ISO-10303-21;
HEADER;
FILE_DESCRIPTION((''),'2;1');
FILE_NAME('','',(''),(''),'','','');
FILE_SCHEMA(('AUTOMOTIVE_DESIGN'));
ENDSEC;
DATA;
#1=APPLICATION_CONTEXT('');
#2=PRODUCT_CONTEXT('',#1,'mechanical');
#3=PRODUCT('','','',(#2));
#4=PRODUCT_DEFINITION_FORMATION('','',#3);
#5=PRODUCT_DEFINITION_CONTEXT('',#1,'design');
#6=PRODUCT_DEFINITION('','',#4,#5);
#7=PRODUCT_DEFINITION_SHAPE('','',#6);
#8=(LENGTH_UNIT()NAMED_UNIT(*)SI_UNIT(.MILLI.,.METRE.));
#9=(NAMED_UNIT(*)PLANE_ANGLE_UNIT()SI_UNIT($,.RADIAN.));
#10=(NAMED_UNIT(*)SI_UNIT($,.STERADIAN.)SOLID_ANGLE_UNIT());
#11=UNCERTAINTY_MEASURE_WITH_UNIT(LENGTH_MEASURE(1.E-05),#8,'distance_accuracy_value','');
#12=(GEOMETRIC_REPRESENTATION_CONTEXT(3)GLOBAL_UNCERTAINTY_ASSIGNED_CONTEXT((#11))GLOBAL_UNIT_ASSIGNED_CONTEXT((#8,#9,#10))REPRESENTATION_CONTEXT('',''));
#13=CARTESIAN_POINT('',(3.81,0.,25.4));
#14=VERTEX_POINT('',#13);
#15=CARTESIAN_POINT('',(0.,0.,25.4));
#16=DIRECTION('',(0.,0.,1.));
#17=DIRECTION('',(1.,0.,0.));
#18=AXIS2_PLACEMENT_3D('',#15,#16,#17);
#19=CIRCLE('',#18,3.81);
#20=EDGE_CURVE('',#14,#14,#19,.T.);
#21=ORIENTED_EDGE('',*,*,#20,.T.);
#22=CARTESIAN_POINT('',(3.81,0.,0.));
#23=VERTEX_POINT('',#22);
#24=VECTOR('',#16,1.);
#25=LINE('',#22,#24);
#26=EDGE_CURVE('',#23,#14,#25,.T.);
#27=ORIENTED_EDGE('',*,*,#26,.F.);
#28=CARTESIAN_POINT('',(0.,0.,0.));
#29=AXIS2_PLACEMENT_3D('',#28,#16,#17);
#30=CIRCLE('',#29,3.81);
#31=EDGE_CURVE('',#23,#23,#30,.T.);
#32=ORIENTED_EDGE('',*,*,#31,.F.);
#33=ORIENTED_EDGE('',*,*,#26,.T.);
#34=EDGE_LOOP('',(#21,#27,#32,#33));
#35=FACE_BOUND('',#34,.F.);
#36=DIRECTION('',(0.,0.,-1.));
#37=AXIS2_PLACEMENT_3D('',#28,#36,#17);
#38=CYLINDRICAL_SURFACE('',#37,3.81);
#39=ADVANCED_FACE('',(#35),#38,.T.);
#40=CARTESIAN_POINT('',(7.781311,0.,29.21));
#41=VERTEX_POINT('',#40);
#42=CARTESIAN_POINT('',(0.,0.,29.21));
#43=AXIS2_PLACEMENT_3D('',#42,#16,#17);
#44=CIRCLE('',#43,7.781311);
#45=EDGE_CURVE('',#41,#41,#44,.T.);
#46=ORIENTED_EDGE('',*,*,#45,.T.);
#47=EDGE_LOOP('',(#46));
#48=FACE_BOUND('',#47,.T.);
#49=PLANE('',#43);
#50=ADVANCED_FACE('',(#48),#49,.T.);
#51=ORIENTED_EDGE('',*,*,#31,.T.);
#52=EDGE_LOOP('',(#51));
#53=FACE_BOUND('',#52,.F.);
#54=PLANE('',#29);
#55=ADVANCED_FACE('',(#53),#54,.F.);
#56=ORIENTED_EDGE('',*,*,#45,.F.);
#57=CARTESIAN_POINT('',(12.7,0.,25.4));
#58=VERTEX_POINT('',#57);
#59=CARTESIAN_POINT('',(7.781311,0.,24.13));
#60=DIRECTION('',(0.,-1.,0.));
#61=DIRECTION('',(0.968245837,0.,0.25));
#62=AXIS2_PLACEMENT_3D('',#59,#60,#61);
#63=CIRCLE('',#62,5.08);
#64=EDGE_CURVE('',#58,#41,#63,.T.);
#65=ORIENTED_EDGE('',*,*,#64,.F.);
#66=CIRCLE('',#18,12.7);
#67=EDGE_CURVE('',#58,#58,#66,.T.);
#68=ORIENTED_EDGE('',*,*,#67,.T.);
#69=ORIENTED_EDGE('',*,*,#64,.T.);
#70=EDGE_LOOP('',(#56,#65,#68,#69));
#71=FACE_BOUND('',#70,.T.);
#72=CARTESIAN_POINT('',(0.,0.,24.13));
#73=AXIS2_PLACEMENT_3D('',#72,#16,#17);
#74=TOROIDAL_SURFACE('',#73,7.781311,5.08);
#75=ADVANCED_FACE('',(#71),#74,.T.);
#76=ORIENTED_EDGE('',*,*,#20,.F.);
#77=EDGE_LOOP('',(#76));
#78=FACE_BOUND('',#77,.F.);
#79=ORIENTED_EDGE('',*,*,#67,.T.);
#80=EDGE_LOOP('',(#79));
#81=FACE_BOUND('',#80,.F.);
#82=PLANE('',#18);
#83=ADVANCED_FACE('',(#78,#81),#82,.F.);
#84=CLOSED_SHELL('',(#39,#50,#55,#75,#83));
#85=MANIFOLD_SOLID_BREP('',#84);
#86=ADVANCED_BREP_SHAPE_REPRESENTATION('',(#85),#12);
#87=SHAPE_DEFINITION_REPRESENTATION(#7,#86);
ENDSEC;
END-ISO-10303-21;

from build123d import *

# Parameters (mm, degrees)
F0_R     = 3.81
F1_DEPTH = 25.4
F2_R     = 6.35
F2_R_2   = 3.81
F3_DEPTH = 3.81
F2_R_3   = 12.7
F4_DEPTH = 3.81


# Not quite as in the source:
# - a fillet or chamfer that OpenCascade refuses, or shapes differently, is made with other operations: its cross-section is extruded or revolved along the edge and cut away or added


with BuildPart() as f1:
    # F0 (on Top) → F1 (new body)
    with BuildSketch(Plane.XY):
        Circle(F0_R)
    extrude(amount=F1_DEPTH)

    # F2 (on face) → F3 (join)
    with BuildSketch(Plane.XY.offset(25.4)):
        Circle(F2_R)
        Circle(F2_R_2, mode=Mode.SUBTRACT)
        Circle(F2_R_2)
    extrude(amount=F3_DEPTH)

    # F2 (on face) → F4 (join)
    with BuildSketch(Plane.XY.offset(25.4)):
        Circle(F2_R_3)
        Circle(F2_R, mode=Mode.SUBTRACT)
    extrude(amount=F4_DEPTH)

    # F5: fillet of radius 5.08 on 1 edges, made by hand

    # F5_s1 → F5_t2 (revolve, cut)
    with BuildSketch(Plane.XZ):
        with BuildLine():
            ThreePointArc((12.7, 25.4), (10.8921631237, 28.1460926284), (7.7813111503, 29.21))
            Line((7.7813111503, 29.21), (12.7, 29.21))
            Line((12.7, 29.21), (12.7, 25.4))
        make_face()
    revolve(axis=Axis((0, 0, 29.21), (0, 0, 1)), mode=Mode.SUBTRACT)


solid = f1.part
